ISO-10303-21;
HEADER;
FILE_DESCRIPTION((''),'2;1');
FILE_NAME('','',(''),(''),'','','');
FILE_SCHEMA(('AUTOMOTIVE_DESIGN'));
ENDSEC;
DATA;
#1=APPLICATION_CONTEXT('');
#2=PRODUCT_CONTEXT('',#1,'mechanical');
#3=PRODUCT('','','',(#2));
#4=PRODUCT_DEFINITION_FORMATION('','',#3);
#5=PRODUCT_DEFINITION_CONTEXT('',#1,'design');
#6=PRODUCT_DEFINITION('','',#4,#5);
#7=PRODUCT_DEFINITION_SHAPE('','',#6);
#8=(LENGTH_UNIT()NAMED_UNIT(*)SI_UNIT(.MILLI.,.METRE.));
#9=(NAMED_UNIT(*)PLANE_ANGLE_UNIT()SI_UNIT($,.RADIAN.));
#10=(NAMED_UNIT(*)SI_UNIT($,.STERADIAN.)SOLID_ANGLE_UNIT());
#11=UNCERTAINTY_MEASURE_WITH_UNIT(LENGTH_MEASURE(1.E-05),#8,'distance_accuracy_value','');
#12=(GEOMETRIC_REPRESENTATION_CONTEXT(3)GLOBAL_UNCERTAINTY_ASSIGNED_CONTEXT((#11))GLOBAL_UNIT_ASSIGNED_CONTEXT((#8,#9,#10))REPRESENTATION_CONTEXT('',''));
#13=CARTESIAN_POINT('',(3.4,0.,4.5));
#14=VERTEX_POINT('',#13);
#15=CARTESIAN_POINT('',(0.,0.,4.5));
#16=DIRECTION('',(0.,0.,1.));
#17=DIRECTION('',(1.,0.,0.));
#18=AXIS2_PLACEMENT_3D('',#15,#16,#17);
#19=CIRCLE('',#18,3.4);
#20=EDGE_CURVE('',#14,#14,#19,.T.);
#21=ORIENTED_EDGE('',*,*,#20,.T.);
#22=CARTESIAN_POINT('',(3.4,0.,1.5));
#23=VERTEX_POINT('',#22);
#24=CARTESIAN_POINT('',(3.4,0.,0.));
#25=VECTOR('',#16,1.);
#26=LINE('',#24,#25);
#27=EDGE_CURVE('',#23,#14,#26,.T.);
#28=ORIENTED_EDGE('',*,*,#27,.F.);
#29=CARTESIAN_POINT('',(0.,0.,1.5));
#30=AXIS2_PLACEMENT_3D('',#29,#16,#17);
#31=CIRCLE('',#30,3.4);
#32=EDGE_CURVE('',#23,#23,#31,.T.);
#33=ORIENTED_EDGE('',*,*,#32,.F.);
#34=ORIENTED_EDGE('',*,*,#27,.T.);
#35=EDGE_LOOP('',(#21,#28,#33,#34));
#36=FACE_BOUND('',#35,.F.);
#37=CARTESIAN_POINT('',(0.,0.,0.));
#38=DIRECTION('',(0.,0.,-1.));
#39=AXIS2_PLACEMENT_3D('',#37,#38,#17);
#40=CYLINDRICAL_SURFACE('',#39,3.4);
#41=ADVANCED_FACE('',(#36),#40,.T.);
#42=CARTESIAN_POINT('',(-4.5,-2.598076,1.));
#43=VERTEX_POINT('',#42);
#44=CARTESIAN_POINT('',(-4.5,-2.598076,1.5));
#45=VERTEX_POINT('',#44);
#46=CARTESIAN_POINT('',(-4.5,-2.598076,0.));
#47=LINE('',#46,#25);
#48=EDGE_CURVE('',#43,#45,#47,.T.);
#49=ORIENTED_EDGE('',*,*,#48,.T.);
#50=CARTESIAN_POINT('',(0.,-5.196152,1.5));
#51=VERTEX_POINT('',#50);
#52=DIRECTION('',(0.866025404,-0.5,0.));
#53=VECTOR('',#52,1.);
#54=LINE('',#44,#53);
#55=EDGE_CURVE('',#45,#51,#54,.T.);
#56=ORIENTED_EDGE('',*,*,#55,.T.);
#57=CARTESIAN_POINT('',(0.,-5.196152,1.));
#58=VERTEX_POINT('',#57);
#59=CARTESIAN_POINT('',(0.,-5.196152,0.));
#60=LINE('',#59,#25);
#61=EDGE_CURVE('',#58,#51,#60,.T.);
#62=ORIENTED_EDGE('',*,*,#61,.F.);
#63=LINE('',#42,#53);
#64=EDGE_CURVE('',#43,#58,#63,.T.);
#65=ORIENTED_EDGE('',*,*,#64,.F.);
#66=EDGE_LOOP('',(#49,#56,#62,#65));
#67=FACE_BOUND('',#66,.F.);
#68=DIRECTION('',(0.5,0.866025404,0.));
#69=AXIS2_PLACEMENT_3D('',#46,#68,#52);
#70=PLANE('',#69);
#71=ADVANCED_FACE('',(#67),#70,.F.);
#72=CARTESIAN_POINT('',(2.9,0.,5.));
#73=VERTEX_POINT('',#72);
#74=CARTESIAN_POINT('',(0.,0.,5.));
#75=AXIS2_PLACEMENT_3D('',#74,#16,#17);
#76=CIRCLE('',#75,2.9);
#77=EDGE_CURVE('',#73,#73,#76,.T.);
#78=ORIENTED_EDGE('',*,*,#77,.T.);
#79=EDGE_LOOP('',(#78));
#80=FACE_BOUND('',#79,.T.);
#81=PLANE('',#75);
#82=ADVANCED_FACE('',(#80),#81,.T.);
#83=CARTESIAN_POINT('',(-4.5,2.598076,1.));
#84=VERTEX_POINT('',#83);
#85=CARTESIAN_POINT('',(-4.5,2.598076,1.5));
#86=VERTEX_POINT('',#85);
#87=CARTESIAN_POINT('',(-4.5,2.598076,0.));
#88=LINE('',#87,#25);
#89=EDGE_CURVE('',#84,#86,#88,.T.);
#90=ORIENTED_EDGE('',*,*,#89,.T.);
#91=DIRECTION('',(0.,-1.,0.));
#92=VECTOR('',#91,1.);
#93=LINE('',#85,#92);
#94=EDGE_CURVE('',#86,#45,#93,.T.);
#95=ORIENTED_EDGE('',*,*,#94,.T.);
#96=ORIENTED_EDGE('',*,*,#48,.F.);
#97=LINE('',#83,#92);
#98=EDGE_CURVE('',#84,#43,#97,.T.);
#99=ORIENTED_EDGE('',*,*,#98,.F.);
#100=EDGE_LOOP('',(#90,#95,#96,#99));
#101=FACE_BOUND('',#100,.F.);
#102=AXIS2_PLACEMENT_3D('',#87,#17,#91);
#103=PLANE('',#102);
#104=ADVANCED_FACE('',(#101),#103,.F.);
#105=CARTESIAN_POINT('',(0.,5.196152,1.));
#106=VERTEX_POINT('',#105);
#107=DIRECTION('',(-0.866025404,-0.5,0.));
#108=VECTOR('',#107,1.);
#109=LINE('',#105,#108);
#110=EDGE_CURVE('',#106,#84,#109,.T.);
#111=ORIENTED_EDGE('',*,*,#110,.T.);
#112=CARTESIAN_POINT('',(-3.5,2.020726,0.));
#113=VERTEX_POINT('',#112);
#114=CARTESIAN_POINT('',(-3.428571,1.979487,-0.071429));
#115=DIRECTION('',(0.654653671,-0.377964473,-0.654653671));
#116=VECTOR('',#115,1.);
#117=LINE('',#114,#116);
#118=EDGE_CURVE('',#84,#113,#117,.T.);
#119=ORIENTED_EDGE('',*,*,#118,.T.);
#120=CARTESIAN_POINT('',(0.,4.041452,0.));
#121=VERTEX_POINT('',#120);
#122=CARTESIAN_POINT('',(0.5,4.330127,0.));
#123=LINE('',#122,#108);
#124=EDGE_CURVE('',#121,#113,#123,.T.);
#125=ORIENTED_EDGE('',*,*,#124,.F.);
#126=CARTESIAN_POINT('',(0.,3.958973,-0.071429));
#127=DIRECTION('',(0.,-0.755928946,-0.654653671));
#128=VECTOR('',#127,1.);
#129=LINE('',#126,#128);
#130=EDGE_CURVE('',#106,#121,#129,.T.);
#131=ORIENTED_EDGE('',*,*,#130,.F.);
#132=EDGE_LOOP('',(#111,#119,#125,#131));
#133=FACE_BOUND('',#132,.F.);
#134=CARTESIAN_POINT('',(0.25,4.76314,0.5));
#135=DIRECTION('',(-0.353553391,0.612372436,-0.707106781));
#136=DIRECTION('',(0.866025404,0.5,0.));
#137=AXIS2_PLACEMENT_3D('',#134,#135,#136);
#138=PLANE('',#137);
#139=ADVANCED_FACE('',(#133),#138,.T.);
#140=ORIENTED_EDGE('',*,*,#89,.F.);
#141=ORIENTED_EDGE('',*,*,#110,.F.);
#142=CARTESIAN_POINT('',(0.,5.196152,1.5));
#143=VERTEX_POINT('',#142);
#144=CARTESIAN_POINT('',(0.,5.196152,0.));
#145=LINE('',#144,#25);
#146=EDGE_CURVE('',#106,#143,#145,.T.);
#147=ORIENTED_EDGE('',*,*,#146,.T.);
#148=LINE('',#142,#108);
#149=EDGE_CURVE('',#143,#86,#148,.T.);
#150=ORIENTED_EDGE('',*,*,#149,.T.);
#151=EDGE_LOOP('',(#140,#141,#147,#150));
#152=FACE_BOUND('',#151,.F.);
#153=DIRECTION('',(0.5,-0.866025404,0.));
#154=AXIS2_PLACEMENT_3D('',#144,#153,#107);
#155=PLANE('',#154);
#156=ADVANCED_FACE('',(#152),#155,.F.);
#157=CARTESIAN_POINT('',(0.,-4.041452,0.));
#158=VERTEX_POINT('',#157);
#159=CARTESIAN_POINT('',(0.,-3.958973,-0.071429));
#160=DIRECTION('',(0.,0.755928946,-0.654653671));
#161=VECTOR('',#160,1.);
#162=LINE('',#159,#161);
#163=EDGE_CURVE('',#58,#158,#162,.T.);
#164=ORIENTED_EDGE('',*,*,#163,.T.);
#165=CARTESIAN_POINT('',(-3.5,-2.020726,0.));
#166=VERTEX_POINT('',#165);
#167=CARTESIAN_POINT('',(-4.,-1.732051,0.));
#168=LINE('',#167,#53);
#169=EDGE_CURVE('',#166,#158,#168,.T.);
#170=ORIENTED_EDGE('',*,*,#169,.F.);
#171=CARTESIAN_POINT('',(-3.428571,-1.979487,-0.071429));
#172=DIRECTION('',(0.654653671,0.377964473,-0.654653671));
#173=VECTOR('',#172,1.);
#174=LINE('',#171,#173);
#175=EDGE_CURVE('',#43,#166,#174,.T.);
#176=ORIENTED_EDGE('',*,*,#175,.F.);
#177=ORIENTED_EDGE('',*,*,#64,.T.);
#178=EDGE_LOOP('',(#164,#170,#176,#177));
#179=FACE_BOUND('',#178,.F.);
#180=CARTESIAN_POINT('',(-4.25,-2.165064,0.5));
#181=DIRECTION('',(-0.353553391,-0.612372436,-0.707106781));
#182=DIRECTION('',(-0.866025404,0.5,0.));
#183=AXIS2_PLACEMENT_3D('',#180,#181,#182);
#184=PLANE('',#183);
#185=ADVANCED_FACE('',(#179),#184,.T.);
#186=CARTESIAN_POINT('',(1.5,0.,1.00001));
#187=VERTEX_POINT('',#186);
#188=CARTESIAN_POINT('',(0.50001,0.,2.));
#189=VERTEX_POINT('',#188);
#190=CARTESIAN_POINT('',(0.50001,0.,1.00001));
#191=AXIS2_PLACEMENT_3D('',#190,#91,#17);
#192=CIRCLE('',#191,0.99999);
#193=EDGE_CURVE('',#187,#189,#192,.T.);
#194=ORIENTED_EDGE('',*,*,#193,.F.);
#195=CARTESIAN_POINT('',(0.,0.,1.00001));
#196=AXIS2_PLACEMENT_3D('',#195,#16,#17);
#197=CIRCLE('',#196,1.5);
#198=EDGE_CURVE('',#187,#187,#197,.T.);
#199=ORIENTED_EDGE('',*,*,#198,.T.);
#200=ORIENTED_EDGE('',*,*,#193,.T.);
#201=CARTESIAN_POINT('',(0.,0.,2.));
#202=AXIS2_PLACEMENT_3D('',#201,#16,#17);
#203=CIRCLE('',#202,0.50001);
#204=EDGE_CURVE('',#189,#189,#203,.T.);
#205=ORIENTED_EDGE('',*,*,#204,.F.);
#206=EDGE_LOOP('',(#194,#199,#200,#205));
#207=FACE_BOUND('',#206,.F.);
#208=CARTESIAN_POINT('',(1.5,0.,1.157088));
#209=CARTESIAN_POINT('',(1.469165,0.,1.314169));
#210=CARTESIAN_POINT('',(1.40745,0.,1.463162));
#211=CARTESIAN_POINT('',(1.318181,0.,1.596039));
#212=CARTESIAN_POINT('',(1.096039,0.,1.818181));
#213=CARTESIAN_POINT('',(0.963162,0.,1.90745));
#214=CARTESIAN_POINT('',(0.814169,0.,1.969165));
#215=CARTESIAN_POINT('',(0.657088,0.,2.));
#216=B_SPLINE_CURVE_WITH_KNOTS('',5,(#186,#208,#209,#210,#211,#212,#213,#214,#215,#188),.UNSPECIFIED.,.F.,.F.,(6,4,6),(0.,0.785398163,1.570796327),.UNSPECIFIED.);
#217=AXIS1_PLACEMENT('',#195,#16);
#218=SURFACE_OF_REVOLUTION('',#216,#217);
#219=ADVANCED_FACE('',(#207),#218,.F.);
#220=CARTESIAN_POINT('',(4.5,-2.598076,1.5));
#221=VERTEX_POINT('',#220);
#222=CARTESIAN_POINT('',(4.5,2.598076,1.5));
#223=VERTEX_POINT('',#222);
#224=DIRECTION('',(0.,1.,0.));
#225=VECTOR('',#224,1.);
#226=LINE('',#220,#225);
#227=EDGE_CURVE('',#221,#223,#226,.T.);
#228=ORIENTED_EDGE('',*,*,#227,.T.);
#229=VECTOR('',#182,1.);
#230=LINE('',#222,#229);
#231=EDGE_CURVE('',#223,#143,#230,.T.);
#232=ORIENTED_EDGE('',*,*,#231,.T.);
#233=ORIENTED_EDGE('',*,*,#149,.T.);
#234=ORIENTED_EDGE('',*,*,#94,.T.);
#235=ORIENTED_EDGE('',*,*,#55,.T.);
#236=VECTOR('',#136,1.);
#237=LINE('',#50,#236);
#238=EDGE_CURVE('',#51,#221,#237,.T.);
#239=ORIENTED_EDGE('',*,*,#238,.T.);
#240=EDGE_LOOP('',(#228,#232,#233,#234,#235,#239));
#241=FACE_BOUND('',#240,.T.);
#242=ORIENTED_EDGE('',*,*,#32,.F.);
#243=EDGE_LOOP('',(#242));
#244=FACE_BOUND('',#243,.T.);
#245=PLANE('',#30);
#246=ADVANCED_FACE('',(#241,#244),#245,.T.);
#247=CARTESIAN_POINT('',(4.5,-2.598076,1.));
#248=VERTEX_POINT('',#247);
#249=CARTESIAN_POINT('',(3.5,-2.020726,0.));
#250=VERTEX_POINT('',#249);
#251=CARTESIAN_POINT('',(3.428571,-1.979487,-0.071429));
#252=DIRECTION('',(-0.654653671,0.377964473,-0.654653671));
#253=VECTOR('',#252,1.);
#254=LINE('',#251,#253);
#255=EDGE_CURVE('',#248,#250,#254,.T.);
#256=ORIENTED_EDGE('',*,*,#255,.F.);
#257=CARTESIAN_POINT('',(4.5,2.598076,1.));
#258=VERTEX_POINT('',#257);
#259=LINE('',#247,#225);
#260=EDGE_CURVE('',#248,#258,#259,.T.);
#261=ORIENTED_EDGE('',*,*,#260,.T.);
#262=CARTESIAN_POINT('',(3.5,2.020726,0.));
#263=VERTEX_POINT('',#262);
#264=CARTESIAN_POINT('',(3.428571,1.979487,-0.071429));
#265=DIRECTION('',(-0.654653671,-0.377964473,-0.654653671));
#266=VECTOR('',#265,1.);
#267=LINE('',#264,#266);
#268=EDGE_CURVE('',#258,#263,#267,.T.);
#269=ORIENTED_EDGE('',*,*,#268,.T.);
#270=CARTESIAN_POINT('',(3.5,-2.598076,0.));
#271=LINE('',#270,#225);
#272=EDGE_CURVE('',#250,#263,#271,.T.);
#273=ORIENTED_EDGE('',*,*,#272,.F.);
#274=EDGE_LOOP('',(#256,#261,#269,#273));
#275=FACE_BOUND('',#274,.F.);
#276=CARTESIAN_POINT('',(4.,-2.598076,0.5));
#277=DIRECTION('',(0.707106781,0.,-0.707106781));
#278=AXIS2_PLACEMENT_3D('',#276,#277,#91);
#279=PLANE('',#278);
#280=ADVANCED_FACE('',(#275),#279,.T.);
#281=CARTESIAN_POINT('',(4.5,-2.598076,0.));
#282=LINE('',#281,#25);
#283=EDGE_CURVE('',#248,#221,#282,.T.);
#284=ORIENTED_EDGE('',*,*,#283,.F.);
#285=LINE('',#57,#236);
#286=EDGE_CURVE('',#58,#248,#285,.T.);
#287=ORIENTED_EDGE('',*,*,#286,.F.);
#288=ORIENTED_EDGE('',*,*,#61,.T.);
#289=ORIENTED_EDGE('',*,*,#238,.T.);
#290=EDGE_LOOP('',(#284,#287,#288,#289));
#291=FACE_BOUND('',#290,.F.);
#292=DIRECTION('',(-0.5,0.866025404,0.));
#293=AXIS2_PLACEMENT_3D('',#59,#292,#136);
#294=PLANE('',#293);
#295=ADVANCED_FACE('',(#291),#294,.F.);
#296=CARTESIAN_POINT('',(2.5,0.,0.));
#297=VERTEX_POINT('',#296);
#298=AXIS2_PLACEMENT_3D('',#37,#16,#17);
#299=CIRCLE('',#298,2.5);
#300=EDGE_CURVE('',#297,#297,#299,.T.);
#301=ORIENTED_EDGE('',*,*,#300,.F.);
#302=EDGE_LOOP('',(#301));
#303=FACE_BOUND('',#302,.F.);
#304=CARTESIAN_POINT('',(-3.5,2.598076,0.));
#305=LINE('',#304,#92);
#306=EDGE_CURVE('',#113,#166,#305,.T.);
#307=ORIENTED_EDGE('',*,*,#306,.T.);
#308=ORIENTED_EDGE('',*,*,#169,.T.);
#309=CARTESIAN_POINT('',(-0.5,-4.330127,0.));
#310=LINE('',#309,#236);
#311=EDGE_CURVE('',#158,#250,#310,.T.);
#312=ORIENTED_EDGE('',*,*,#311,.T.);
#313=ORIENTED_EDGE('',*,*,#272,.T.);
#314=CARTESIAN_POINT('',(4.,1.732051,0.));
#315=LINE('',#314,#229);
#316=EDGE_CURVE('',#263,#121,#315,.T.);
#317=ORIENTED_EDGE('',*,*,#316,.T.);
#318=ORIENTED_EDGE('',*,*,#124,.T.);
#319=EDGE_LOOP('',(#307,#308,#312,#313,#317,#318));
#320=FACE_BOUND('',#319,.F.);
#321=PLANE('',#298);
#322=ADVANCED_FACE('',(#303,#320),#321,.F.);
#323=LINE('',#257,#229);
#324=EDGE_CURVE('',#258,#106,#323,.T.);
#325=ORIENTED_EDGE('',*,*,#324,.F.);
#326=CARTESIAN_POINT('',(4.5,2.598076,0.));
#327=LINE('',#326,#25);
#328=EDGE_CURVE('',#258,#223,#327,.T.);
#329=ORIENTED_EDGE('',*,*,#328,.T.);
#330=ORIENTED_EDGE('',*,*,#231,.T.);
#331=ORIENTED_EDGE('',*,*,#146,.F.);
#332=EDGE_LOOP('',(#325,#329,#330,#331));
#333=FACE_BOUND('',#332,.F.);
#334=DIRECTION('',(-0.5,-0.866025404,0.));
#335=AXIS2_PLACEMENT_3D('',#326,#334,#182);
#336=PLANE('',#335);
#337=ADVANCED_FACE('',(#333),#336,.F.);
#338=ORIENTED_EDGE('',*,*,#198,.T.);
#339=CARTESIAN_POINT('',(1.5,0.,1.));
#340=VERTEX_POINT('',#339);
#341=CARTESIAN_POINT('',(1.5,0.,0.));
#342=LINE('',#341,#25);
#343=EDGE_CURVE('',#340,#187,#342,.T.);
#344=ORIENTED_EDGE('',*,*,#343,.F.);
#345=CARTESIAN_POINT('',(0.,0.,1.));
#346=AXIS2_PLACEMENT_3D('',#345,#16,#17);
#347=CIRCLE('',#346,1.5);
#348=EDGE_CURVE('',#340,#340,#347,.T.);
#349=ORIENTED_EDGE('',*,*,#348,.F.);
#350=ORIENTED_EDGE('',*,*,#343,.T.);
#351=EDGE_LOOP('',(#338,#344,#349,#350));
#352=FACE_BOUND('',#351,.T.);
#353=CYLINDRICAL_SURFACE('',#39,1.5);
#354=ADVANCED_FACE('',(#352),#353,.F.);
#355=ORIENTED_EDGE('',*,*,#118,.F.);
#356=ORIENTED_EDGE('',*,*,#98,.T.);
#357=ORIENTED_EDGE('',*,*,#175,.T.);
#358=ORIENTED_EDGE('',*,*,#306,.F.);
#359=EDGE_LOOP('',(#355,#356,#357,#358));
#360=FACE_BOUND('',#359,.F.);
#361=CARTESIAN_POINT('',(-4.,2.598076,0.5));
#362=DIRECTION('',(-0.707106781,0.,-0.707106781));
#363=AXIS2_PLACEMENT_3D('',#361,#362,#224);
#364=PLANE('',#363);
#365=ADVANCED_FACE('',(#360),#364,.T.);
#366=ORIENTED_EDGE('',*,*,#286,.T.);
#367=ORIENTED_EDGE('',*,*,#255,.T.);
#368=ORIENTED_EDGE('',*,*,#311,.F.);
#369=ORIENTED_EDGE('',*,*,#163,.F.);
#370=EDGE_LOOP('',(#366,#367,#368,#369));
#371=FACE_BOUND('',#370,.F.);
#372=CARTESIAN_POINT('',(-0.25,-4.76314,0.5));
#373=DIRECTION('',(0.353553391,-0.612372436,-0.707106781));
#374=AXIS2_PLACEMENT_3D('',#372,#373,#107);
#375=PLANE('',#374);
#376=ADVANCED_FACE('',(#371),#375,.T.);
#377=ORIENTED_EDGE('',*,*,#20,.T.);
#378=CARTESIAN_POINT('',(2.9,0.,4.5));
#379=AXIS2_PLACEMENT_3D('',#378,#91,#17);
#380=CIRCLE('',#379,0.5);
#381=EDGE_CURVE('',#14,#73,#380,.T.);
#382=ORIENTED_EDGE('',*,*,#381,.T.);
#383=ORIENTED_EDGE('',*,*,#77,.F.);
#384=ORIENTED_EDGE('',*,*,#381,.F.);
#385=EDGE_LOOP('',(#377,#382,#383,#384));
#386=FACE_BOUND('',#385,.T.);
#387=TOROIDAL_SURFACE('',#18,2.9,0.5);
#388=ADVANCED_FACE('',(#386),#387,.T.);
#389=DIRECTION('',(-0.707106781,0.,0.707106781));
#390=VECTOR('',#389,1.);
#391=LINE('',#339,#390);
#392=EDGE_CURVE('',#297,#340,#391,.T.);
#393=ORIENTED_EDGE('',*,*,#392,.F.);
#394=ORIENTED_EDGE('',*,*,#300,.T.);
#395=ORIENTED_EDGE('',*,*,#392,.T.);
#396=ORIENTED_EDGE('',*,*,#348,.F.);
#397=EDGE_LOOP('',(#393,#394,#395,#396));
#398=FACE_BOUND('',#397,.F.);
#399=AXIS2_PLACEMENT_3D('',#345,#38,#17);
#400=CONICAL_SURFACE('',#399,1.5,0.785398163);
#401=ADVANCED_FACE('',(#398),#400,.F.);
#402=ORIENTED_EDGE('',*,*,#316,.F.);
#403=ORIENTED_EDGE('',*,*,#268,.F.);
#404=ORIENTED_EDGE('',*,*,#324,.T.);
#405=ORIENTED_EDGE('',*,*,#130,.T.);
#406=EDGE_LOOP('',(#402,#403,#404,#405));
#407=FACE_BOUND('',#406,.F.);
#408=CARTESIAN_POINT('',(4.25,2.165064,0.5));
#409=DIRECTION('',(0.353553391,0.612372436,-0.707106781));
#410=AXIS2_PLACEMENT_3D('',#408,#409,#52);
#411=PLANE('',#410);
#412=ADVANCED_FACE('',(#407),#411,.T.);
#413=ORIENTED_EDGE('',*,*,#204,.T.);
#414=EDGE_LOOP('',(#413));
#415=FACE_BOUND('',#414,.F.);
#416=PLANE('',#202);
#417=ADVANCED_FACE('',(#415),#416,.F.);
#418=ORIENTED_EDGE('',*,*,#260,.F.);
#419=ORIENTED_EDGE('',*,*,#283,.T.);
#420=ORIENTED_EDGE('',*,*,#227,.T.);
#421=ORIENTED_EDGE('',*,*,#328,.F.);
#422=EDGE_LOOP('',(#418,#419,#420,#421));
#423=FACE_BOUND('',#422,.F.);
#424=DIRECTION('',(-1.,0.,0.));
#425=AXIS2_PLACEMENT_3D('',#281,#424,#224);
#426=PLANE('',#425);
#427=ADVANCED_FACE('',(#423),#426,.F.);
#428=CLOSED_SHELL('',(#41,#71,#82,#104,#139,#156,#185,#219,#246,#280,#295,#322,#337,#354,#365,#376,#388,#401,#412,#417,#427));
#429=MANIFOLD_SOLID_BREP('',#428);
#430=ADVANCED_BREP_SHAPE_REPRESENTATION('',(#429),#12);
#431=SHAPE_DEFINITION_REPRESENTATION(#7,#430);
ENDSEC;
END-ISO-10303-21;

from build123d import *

# Parameters (mm, degrees)
F0_R     = 3.4
F1_DEPTH = 1.5
F0_R_2   = 1.5
F2_DEPTH = 5
F3_DEPTH = 2
F4_SIZE  = 1
F5_R     = 0.99999
F6_R     = 0.5


# Not quite as in the source:
# - a fillet or chamfer is up to 0.001 mm smaller than in the source, because OpenCascade refuses the exact size


with BuildPart() as f1:
    # F0 (on Top) → F1 (new body)
    with BuildSketch(Plane.XY):
        Polygon((4.5, -2.5980762114), (4.5, 2.5980762114), (0, 5.1961524227), (-4.5, 2.5980762114), (-4.5, -2.5980762114), (0, -5.1961524227), align=None)
        Circle(F0_R, mode=Mode.SUBTRACT)
    extrude(amount=F1_DEPTH)

    # F0 (on Top) → F2 (join)
    with BuildSketch(Plane.XY):
        Circle(F0_R)
        Circle(F0_R_2, mode=Mode.SUBTRACT)
        Circle(F0_R_2)
    extrude(amount=F2_DEPTH)

    # F0 (on Top) → F3 (cut)
    with BuildSketch(Plane.XY):
        Circle(F0_R_2)
    extrude(amount=F3_DEPTH, mode=Mode.SUBTRACT)

    # F4
    f4_edges = [f1.edges().sort_by_distance(p)[0] for p in [
        (4.5, 0, 0),
        (2.25, -3.897114, 0),
        (2.25, 3.897114, 0),
        (-2.25, -3.897114, 0),
        (-2.25, 3.897114, 0),
        (-4.5, 0, 0),
        (-1.5, 0, 0),
    ]]
    chamfer(f4_edges, length=F4_SIZE)

    # F5 (radius 1 in the source; OpenCascade refuses exactly that, so slightly less here)
    f5_edges = [f1.edges().sort_by_distance(p)[0] for p in [
        (-1.5, 0, 2),
    ]]
    fillet(f5_edges, radius=F5_R)

    # F6
    f6_edges = [f1.edges().sort_by_distance(p)[0] for p in [
        (-3.4, 0, 5),
    ]]
    fillet(f6_edges, radius=F6_R)


solid = f1.part
